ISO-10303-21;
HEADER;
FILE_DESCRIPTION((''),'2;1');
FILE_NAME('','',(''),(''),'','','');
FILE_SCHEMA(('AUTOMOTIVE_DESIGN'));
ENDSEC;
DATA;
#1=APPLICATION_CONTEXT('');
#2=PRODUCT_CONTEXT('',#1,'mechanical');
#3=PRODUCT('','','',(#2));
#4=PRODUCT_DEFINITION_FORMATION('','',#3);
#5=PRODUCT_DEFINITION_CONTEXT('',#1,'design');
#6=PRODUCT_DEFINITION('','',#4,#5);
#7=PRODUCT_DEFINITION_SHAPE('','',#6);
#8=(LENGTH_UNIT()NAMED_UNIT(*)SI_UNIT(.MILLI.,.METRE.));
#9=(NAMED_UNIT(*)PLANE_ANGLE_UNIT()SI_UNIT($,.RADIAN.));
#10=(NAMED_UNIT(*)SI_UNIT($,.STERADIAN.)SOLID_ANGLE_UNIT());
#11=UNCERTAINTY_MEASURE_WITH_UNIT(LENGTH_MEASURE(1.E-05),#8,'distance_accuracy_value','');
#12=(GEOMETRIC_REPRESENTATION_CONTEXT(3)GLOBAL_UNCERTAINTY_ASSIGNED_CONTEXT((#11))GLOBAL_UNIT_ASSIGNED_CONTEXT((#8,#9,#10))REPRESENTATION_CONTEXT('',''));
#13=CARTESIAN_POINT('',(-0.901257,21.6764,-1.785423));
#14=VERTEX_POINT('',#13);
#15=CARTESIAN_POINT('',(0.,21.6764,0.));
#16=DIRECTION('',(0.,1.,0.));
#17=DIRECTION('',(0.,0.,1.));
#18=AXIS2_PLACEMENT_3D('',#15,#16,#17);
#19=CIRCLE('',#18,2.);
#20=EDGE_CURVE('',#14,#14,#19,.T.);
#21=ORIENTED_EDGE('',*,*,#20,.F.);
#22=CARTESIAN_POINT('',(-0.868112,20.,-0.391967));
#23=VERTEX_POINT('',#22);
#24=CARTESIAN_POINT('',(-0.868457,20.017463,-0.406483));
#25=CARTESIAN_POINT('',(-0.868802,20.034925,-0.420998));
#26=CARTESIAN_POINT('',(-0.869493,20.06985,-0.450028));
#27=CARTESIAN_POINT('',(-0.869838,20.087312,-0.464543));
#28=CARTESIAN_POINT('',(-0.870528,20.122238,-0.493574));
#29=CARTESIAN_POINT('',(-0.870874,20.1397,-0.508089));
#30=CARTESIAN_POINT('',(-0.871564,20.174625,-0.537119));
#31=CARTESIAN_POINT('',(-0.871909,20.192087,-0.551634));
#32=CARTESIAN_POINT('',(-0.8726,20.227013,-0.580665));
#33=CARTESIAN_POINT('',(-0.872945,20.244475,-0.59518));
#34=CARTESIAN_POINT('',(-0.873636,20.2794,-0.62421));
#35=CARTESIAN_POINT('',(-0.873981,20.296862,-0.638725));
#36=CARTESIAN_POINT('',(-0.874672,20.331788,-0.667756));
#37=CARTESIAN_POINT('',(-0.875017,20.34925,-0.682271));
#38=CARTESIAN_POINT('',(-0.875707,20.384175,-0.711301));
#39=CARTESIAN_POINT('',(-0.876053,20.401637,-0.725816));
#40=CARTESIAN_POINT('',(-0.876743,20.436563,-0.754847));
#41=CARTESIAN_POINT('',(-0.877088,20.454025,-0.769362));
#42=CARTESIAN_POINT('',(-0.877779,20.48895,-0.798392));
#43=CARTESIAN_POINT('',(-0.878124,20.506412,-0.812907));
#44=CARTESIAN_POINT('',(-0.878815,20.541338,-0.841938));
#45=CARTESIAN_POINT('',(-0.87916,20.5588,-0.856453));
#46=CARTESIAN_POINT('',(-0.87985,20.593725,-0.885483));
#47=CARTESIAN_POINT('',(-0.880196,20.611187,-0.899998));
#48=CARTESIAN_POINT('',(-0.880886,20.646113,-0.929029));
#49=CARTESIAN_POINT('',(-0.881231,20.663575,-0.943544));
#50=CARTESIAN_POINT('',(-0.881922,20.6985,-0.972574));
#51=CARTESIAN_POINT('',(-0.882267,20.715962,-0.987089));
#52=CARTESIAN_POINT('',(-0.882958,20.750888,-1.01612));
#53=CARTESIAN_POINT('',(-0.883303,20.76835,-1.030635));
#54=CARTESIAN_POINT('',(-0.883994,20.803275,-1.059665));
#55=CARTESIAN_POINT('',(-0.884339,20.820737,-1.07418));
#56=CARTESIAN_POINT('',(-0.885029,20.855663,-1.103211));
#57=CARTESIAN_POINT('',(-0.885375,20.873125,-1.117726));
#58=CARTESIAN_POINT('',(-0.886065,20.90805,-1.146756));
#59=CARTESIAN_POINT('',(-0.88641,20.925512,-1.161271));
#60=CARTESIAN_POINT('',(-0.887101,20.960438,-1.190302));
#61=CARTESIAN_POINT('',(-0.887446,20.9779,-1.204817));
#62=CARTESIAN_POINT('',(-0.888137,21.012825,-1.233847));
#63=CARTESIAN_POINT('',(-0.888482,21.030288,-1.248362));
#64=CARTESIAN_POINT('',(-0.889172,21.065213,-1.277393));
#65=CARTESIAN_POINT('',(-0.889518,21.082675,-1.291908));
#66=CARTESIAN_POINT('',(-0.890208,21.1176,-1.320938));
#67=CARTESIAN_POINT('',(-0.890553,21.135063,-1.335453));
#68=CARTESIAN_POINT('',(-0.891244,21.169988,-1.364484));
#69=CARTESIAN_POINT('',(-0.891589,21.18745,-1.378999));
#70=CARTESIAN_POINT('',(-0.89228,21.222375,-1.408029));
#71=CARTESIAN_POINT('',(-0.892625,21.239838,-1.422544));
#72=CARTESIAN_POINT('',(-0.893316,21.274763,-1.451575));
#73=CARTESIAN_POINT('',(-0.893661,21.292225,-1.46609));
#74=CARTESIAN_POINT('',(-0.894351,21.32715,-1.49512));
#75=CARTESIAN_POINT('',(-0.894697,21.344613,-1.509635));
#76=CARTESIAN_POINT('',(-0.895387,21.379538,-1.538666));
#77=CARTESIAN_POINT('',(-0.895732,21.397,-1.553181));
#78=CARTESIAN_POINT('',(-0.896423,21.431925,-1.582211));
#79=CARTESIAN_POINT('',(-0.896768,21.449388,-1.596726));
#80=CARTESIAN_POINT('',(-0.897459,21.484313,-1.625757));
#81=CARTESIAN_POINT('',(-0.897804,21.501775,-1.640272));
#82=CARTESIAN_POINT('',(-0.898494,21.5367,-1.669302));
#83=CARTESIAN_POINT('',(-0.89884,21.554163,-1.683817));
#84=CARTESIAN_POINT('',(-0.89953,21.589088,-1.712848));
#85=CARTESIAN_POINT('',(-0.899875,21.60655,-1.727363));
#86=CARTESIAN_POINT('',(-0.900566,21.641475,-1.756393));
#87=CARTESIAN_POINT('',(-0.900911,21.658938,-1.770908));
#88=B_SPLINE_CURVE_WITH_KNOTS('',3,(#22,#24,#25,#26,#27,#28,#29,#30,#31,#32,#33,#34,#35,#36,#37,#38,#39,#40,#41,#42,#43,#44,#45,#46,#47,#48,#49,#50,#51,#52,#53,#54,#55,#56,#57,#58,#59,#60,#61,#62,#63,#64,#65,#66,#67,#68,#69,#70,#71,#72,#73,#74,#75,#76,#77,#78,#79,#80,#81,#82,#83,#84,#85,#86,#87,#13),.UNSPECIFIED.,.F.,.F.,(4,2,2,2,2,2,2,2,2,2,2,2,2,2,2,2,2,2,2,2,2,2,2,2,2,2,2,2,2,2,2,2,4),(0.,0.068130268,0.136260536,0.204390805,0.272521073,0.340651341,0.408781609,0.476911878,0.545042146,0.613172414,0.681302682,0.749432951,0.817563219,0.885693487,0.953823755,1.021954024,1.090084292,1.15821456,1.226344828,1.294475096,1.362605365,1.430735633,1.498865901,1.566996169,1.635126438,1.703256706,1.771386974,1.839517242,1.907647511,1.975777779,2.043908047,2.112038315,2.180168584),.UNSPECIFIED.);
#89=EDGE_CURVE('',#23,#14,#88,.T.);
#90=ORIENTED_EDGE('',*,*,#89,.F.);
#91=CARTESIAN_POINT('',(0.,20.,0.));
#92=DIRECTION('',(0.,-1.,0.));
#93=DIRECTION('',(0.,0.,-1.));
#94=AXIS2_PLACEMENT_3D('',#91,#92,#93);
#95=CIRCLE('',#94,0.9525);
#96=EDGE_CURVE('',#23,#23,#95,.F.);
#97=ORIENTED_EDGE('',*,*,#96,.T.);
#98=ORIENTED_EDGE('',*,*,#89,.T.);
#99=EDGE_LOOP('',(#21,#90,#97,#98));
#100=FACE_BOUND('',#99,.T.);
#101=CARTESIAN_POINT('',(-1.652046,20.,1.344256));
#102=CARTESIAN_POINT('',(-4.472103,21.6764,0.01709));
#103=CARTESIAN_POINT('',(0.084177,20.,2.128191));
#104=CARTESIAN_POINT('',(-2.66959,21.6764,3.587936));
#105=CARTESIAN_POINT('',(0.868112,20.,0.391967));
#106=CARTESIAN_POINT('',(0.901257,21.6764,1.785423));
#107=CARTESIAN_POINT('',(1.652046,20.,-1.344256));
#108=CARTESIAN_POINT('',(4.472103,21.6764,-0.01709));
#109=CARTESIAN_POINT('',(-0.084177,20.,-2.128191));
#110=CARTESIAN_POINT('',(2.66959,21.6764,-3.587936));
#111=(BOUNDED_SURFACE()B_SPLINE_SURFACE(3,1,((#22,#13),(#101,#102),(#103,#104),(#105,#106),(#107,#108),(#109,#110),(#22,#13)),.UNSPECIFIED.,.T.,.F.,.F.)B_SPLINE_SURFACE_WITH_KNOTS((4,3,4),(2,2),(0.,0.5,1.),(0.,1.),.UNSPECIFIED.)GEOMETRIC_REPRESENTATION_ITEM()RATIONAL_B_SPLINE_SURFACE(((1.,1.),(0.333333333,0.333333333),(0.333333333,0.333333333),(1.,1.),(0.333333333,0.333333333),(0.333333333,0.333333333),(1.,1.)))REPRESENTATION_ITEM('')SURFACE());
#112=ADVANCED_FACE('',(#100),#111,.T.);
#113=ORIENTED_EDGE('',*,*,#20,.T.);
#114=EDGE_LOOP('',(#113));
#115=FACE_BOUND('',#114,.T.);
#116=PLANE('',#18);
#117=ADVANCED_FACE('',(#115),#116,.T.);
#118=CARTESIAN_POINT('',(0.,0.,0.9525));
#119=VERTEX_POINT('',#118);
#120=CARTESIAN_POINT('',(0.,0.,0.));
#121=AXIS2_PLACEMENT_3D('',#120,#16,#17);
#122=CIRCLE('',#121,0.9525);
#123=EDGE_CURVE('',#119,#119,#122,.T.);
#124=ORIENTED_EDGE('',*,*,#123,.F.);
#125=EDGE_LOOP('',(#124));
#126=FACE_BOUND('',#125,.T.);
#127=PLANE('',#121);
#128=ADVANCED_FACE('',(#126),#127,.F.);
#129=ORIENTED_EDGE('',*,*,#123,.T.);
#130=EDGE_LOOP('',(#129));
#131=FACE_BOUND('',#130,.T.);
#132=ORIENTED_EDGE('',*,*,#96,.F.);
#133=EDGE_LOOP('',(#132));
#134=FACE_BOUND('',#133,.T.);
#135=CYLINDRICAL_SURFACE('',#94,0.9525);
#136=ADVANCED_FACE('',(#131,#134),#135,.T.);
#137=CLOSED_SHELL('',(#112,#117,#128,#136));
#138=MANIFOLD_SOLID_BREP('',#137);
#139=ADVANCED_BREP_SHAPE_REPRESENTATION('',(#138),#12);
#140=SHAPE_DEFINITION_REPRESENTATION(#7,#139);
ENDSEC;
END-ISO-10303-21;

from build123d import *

# Parameters (mm, degrees)
SKETCH1_R           = 0.9525
BOSS_EXTRUDE1_DEPTH = 20


with BuildPart() as part:
    # Sketch1 → Boss-Extrude1 (new body)
    with BuildSketch(Plane(origin=(0, 0, 0), x_dir=(1, 0, 0), z_dir=(0, 1, 0))):
        with Locations(Location((0, 0, 0), (0, 0, 270))):
            Circle(SKETCH1_R)
    extrude(amount=BOSS_EXTRUDE1_DEPTH)

    # Loft1: read off the stored shape, not the designer's step
    # Loft1: loft between two sections, ruled curve by curve
    loft1_from = [
        Edge.make_bspline([(-0.868111621, 20, -0.391967427), (-1.652046474, 20, 1.344255815), (0.084176768, 20, 2.128190669), (0.868111621, 20, 0.391967427), (1.652046474, 20, -1.344255815), (-0.084176768, 20, -2.128190669), (-0.868111621, 20, -0.391967427)], [0, 0, 0, 0, 0.5, 0.5, 0.5, 1, 1, 1, 1], 3, [1, 0.333333333, 0.333333333, 1, 0.333333333, 0.333333333, 1]),
    ]
    loft1_to = [
        Edge.make_bspline([(-0.901256532, 21.6764, -1.785423385), (-4.472103302, 21.6764, 0.01708968), (-2.669590237, 21.6764, 3.587936449), (0.901256532, 21.6764, 1.785423385), (4.472103302, 21.6764, -0.01708968), (2.669590237, 21.6764, -3.587936449), (-0.901256532, 21.6764, -1.785423385)], [0, 0, 0, 0, 0.5, 0.5, 0.5, 1, 1, 1, 1], 3, [1, 0.333333333, 0.333333333, 1, 0.333333333, 0.333333333, 1]),
    ]
    loft1 = Solid(Shell([*[Face.make_surface_from_curves(loft1_from[k], loft1_to[k]) for k in range(1)], Face(Wire(loft1_from)), Face(Wire(loft1_to))]))
    add(loft1)


solid = part.part
